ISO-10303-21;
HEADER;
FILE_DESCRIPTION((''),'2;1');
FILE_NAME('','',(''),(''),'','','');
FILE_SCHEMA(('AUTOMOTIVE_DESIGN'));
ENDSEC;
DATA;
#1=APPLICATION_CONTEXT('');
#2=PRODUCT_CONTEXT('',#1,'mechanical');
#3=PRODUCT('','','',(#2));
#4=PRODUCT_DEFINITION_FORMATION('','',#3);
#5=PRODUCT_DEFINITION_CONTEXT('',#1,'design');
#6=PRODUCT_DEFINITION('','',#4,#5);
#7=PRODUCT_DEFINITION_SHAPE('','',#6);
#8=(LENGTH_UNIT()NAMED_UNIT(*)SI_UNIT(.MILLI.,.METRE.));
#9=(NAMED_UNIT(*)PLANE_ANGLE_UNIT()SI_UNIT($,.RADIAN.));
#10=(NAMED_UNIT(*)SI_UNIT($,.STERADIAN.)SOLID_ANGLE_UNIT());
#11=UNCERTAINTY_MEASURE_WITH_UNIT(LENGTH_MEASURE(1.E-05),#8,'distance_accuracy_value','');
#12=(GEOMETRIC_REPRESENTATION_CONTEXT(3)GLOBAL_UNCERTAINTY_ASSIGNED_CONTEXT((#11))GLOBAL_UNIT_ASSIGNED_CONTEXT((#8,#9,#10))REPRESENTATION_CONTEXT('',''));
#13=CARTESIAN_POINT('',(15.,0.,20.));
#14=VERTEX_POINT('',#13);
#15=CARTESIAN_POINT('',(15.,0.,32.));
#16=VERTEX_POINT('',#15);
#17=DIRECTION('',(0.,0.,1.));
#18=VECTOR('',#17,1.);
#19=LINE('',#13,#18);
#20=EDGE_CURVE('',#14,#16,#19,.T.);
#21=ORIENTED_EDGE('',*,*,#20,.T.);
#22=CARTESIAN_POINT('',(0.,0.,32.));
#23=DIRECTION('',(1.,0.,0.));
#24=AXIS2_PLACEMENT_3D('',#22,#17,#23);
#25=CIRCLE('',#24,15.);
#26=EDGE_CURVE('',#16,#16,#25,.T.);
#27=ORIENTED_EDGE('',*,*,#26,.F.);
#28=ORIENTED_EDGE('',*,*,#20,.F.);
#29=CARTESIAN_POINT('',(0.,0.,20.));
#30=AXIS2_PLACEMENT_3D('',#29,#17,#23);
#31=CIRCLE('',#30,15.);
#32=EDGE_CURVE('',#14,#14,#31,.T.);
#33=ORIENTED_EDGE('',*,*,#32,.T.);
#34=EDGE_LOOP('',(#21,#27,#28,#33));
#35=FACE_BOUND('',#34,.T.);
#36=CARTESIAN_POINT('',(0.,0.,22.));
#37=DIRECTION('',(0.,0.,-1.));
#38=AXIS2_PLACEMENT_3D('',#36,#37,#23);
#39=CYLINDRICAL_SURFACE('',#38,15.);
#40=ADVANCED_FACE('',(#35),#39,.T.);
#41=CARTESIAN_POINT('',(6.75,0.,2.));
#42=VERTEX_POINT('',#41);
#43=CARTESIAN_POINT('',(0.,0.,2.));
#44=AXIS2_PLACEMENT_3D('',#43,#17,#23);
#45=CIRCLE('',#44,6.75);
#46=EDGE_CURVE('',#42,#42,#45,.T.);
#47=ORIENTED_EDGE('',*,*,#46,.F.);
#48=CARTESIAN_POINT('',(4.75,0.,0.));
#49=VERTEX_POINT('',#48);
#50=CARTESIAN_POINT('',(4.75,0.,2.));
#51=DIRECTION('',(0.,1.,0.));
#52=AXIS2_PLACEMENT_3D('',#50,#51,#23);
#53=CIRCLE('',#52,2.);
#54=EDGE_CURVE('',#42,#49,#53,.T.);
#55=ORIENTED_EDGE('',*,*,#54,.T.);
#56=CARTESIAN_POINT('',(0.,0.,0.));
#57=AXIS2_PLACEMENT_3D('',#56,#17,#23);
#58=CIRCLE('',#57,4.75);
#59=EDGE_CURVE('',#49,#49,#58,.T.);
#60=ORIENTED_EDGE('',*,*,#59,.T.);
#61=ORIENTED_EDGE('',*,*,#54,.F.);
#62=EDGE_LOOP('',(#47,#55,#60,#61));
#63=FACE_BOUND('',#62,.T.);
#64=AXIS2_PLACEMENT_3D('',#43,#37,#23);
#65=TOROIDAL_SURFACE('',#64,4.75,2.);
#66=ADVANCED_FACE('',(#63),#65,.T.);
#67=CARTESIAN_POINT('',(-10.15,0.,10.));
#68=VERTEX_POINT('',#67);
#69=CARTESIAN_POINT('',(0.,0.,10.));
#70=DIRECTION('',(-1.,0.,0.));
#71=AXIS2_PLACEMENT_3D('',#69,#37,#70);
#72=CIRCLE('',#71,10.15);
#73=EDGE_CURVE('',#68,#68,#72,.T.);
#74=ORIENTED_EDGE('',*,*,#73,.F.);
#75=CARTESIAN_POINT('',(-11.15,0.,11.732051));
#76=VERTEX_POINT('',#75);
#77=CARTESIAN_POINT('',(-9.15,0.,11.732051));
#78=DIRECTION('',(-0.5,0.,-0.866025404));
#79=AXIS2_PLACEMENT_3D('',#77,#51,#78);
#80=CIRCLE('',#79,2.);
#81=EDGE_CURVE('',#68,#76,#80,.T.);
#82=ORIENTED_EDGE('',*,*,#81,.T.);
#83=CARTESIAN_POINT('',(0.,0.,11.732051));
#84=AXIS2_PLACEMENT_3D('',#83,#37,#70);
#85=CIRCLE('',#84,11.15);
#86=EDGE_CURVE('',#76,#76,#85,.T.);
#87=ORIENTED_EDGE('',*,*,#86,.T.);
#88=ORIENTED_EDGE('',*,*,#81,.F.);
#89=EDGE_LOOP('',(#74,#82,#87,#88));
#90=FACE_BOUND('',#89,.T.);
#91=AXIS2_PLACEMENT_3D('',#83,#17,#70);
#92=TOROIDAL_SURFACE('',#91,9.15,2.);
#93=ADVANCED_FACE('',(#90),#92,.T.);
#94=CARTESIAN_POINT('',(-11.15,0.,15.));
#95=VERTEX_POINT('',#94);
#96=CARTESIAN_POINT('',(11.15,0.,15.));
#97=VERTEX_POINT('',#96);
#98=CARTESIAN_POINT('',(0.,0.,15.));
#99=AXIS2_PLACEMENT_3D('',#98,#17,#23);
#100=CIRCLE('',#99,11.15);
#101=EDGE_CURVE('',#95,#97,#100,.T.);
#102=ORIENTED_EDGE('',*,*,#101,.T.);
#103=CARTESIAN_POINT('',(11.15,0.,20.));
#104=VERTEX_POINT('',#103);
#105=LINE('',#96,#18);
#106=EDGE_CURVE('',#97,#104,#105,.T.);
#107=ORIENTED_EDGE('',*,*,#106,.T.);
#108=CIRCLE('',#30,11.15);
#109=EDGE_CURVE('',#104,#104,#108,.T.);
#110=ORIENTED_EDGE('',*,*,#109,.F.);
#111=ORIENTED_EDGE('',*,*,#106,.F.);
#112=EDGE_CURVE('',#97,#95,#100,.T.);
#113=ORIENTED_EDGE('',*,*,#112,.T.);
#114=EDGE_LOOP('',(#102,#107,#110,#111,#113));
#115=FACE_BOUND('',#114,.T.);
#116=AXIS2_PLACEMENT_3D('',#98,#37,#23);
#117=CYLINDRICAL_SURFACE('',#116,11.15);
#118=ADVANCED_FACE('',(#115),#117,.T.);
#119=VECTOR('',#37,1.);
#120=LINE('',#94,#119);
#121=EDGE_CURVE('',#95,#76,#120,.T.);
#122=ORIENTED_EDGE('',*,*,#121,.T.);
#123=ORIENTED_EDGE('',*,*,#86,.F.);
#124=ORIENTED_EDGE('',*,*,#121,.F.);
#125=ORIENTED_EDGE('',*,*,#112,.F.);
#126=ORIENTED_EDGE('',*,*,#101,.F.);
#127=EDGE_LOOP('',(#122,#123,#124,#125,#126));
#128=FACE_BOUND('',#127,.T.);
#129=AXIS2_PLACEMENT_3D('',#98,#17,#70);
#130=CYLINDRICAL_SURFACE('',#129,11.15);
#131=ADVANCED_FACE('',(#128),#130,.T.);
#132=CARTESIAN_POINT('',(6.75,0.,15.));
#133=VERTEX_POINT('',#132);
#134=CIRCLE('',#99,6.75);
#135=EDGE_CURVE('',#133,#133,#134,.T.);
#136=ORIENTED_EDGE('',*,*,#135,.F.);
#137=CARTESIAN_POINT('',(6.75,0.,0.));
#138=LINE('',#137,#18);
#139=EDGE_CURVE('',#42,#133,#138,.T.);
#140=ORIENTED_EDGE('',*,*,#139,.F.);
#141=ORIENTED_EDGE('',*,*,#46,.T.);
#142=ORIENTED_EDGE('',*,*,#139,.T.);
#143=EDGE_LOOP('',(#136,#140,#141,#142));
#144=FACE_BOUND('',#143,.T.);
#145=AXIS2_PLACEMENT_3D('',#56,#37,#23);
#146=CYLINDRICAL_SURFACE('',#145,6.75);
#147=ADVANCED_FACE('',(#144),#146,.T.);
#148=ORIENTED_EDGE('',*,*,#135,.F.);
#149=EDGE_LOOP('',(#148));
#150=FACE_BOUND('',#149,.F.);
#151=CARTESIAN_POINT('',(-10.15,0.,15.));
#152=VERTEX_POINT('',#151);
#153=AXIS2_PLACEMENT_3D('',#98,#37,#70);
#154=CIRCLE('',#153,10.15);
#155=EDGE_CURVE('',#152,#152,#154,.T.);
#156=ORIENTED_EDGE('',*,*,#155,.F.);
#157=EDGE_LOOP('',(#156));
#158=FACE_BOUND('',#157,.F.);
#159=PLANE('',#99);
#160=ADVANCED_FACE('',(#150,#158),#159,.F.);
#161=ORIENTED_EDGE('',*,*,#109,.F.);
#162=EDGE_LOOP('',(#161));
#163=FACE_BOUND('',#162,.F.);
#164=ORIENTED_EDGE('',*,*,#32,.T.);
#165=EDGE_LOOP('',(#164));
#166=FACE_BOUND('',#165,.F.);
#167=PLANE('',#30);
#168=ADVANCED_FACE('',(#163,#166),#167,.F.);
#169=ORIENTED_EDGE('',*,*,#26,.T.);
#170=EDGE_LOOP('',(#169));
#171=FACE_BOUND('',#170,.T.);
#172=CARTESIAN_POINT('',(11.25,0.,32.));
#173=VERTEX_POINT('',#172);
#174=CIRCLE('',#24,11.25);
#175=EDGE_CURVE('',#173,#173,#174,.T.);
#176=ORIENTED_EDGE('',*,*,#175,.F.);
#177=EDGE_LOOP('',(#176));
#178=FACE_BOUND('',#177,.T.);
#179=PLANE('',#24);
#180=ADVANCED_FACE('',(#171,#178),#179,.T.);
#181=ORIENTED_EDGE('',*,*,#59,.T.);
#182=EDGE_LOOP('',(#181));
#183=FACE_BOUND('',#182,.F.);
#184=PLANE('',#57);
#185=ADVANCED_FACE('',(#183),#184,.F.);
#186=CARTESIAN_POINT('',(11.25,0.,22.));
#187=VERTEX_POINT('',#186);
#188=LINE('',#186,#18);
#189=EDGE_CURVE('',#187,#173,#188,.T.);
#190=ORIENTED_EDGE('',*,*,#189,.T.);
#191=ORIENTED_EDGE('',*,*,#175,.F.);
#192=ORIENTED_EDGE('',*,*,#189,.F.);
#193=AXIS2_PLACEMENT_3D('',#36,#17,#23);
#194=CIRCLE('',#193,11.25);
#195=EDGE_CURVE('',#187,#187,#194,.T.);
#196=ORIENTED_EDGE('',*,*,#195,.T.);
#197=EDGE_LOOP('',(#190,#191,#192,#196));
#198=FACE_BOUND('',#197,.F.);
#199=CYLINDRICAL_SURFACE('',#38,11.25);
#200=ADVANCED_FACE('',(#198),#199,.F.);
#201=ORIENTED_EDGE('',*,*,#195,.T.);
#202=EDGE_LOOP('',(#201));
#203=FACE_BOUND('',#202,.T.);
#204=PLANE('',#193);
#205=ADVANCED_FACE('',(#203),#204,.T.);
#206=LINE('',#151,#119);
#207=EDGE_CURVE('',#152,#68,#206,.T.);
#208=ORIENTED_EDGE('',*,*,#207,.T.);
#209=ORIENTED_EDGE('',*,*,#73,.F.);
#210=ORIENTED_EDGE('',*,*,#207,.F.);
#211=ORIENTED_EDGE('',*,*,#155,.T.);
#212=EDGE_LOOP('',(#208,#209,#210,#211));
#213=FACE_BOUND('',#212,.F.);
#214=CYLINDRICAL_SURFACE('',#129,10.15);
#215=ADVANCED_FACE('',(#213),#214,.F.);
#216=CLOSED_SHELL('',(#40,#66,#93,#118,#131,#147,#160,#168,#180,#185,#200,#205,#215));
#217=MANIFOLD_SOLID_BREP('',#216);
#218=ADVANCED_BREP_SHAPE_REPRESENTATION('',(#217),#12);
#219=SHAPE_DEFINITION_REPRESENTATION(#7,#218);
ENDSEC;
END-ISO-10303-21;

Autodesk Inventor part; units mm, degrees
ref_plane "YZ Plane" through (0, 0, 0) normal (1, 0, 0) x (0, 1, 0)
ref_plane "XZ Plane" through (0, 0, 0) normal (0, 1, 0) x (-1, 0, 0)
ref_plane "XY Plane" through (0, 0, 0) normal (0, 0, 1) x (1, 0, 0)
sketch "Sketch1" plane through (0, 0, 0) normal (0, 0, 1) x (1, 0, 0)
  circle A0 centre (0, 0) radius 6.75
  dimension "d0" = 13.5
extrude "Extrusion1" add sketch "Sketch1" along normal blind 15
sketch "Sketch2" plane through (0, 0, 15) normal (0, 0, 1) x (1, 0, 0)
  circle A0 centre (0, 0) radius 11.15
  circle A1 centre (0, 0) radius 12.75
  dimension "d3" = 22.3
  dimension "d19" = 25.5
extrude "Extrusion3" add sketch "Sketch2" along normal blind 5 contours A0
sketch "Sketch3" plane through (0, 0, 15) normal (0, 0, -1) x (-1, 0, 0)
  circle A0 centre (0, 0) radius 10.15
  circle A1 centre (0, 0) radius 11.15
  dimension "d8" = 20.3
  dimension "d9" = 22.3
extrude "Extrusion4" add sketch "Sketch3" along normal blind 5
sketch "Sketch4" plane through (0, 0, 20) normal (0, 0, 1) x (1, 0, 0)
  circle A0 centre (0, 0) radius 14.25
  dimension "d12" = 28.5
extrude "Extrusion5" [suppressed]
fillet "Fillet1" [suppressed]
fillet "Fillet2" radius 2 1 edges at (-6.75, 0, 0)
fillet "Fillet3" radius 2 1 edges at (11.15, 0, 10)
fillet "Fillet4" [suppressed]
sketch "Sketch7" plane through (0, 0, 20) normal (0, 0, 1) x (1, 0, 0)
  circle A0 centre (0, 0) radius 15
  dimension "d20" = 30
extrude "Extrusion6" add sketch "Sketch7" along normal blind 2
sketch "Sketch8" plane through (0, 0, 22) normal (0, 0, 1) x (1, 0, 0)
  circle A0 centre (0, 0) radius 11.25
  circle A1 centre (0, 0) radius 15
  dimension "d23" = 22.5
  dimension "d24" = 30
extrude "Extrusion7" add sketch "Sketch8" along normal blind 10
properties part number "Elbow_Parallel_Rod_V1"
